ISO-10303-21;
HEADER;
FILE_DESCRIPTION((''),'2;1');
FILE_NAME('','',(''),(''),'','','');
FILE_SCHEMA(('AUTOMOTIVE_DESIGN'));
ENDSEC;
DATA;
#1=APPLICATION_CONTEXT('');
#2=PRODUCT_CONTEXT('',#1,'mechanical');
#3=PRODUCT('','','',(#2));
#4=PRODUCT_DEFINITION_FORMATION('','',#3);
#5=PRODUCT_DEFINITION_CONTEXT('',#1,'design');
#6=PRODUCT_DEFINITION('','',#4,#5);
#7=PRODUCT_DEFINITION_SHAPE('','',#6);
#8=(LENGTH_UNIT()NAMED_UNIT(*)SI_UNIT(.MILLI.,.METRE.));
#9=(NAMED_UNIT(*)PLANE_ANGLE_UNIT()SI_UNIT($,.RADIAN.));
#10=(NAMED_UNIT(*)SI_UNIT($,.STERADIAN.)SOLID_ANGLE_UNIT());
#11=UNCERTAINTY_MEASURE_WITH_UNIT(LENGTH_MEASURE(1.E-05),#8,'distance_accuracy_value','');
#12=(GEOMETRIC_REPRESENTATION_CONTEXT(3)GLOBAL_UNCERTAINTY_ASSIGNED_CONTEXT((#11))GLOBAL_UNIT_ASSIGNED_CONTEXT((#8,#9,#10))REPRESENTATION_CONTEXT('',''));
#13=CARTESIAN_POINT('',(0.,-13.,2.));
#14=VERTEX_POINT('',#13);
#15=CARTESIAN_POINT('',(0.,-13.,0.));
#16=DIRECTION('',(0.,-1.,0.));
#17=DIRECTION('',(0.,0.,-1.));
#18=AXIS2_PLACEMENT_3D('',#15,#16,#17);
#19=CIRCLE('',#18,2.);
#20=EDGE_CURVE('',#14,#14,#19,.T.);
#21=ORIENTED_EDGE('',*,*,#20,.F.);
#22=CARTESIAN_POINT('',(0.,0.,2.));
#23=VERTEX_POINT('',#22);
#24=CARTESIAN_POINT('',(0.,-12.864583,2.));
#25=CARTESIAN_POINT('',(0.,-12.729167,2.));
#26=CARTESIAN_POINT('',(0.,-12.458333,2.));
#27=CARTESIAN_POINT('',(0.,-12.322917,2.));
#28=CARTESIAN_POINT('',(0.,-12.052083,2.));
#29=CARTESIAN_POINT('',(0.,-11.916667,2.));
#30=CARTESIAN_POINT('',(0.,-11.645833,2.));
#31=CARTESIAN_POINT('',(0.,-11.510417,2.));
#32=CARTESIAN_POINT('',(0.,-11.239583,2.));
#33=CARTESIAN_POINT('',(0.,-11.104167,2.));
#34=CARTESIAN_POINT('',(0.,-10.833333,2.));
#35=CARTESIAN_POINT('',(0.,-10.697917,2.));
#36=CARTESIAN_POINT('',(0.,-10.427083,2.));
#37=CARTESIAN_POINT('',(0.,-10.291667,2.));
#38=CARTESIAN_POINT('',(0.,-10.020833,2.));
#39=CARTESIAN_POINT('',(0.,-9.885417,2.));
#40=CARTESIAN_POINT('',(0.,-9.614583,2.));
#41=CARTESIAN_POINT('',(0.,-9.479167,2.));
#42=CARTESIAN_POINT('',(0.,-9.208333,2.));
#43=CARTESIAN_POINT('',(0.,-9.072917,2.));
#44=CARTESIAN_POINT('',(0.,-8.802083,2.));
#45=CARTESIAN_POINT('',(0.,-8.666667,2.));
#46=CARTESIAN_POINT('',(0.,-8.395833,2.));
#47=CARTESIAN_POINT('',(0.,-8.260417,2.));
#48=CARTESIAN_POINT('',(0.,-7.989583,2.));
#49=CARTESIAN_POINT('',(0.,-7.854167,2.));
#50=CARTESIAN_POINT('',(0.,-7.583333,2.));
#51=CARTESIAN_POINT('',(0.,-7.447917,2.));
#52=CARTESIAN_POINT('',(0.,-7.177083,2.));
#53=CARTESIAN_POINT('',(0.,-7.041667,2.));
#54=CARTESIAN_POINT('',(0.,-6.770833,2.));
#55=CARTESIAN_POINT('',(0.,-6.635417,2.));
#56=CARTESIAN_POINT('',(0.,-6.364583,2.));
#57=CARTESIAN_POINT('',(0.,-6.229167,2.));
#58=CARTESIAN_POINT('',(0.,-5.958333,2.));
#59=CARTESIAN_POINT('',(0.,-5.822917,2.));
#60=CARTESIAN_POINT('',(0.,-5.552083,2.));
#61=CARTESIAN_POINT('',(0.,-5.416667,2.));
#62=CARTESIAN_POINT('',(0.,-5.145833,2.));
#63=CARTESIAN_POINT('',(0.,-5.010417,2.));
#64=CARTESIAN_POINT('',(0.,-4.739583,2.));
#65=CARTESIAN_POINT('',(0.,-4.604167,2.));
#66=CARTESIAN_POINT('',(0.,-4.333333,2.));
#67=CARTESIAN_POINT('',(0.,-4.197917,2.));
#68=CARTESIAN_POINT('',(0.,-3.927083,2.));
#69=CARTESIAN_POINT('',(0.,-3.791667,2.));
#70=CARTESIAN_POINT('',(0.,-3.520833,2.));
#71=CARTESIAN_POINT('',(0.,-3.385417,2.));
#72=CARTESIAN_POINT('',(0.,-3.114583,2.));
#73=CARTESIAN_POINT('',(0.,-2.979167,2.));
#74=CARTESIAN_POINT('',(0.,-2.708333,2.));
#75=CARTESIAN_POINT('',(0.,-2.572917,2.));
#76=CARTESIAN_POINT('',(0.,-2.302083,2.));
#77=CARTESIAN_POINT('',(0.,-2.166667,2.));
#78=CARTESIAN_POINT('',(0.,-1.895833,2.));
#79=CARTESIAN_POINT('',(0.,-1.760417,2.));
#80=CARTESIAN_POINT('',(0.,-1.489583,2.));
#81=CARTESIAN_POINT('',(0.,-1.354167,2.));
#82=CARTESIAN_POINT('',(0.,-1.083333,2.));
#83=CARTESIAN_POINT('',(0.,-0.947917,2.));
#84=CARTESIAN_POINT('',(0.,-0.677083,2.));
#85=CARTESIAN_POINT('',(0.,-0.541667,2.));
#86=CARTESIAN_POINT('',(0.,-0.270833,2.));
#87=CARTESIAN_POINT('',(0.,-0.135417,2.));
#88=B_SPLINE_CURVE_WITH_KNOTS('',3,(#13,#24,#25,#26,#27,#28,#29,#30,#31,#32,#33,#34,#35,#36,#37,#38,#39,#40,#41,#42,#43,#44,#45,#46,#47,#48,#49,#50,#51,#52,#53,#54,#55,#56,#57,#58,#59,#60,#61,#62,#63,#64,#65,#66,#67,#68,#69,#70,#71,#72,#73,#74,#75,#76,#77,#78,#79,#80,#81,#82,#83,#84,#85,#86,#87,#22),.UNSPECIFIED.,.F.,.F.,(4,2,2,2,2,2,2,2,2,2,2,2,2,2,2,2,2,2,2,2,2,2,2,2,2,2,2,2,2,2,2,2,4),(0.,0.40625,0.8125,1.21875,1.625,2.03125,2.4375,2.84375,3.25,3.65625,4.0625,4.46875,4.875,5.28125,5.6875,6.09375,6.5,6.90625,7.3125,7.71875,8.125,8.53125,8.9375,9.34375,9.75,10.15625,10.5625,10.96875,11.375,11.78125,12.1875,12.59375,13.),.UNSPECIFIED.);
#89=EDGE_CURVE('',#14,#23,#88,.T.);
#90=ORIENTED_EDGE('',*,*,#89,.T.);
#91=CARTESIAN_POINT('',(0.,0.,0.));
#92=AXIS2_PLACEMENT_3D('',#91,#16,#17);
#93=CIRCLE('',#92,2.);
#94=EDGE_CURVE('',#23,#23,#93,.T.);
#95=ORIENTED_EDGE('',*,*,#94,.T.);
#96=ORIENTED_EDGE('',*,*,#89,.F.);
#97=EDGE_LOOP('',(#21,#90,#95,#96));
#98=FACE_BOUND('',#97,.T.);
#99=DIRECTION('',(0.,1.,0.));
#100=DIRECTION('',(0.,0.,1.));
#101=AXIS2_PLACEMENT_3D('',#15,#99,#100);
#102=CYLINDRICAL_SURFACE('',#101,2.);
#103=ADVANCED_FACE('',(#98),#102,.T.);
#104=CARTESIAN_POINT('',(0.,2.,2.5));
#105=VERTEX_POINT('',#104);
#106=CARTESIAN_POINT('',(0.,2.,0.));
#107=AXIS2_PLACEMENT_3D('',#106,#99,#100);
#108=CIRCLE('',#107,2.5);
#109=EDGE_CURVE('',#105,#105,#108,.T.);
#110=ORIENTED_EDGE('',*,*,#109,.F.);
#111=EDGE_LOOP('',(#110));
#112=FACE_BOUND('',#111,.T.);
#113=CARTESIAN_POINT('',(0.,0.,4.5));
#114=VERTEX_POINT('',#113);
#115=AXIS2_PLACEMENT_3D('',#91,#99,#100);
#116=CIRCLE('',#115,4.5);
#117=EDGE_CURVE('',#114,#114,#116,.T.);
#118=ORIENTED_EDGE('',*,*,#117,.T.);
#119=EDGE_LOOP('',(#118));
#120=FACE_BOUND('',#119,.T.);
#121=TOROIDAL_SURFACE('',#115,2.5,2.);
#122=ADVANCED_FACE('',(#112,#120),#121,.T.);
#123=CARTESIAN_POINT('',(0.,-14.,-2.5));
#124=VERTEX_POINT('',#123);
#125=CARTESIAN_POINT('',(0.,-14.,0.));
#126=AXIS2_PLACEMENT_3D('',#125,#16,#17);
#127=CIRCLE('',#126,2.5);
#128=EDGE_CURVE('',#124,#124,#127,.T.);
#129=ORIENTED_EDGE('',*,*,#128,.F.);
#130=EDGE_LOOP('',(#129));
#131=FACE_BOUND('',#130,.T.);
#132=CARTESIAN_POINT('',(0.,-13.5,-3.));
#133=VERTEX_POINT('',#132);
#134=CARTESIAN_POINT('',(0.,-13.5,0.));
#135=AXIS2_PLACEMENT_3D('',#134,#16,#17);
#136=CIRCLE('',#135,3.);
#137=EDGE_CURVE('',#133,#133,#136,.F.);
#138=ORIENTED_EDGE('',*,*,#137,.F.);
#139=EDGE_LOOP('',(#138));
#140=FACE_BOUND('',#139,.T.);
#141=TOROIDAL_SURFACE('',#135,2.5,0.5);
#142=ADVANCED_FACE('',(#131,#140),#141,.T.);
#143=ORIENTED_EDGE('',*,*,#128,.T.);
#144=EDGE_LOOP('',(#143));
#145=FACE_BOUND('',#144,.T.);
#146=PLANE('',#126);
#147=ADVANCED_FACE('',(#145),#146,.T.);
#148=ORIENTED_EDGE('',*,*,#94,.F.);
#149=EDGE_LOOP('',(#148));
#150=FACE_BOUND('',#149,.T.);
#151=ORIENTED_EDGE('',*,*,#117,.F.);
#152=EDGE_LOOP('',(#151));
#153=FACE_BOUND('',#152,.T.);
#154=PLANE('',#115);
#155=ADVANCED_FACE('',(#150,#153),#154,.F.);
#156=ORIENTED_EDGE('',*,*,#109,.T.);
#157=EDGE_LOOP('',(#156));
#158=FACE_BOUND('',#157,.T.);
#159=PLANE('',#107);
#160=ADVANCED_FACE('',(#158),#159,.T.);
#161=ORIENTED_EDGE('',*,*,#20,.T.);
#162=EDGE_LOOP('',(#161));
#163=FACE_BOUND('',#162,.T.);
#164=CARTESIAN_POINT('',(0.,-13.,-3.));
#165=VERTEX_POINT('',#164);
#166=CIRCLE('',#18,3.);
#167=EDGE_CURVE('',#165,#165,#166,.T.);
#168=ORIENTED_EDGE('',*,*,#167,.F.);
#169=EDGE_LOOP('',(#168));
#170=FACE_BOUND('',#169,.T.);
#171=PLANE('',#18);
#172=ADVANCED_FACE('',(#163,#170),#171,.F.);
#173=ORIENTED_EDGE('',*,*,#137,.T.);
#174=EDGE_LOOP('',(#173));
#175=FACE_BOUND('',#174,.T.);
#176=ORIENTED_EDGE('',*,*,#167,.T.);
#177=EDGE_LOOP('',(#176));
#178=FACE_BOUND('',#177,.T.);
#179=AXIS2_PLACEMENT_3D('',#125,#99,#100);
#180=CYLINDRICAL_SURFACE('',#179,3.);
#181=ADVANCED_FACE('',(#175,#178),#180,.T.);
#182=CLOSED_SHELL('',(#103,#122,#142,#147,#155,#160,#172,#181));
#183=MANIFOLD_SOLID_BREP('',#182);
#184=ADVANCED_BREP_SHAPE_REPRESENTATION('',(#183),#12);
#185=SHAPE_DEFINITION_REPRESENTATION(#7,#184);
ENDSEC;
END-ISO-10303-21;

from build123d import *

# Parameters (mm, degrees)
CROQUIS1_R              = 4.5
SALIENTE_EXTRUIR1_DEPTH = 2
CROQUIS2_R              = 2
SALIENTE_EXTRUIR2_DEPTH = 13
REDONDEO1_R             = 2
CROQUIS3_R              = 3
SALIENTE_EXTRUIR3_DEPTH = 1
REDONDEO2_R             = 0.5


with BuildPart() as part:
    # Croquis1 → Saliente-Extruir1 (new body)
    with BuildSketch(Plane(origin=(0, 0, 0), x_dir=(1, 0, 0), z_dir=(0, 1, 0))):
        with Locations(Location((0, 0, 0), (0, 0, 270))):
            Circle(CROQUIS1_R)
    extrude(amount=SALIENTE_EXTRUIR1_DEPTH)

    # Croquis2 → Saliente-Extruir2 (add)
    with BuildSketch(Plane.XZ):
        with Locations(Location((0, 0, 0), (0, 0, 90))):
            Circle(CROQUIS2_R)
    extrude(amount=SALIENTE_EXTRUIR2_DEPTH)

    # Redondeo1
    redondeo1_edges = [part.edges().sort_by_distance(p)[0] for p in [
        (0, 2, -4.5),
    ]]
    fillet(redondeo1_edges, radius=REDONDEO1_R - 0.0001)  # a hair under: the kernel refuses the full size

    # Croquis3 → Saliente-Extruir3 (add)
    with BuildSketch(Plane(origin=(0, -13, 0), x_dir=(-1, 0, 0), z_dir=(0, -1, 0))):
        with Locations(Location((0, 0, 0), (0, 0, 90))):
            Circle(CROQUIS3_R)
    extrude(amount=SALIENTE_EXTRUIR3_DEPTH)

    # Redondeo2
    redondeo2_edges = [part.edges().sort_by_distance(p)[0] for p in [
        (0, -14, 3),
    ]]
    fillet(redondeo2_edges, radius=REDONDEO2_R)


solid = part.part
